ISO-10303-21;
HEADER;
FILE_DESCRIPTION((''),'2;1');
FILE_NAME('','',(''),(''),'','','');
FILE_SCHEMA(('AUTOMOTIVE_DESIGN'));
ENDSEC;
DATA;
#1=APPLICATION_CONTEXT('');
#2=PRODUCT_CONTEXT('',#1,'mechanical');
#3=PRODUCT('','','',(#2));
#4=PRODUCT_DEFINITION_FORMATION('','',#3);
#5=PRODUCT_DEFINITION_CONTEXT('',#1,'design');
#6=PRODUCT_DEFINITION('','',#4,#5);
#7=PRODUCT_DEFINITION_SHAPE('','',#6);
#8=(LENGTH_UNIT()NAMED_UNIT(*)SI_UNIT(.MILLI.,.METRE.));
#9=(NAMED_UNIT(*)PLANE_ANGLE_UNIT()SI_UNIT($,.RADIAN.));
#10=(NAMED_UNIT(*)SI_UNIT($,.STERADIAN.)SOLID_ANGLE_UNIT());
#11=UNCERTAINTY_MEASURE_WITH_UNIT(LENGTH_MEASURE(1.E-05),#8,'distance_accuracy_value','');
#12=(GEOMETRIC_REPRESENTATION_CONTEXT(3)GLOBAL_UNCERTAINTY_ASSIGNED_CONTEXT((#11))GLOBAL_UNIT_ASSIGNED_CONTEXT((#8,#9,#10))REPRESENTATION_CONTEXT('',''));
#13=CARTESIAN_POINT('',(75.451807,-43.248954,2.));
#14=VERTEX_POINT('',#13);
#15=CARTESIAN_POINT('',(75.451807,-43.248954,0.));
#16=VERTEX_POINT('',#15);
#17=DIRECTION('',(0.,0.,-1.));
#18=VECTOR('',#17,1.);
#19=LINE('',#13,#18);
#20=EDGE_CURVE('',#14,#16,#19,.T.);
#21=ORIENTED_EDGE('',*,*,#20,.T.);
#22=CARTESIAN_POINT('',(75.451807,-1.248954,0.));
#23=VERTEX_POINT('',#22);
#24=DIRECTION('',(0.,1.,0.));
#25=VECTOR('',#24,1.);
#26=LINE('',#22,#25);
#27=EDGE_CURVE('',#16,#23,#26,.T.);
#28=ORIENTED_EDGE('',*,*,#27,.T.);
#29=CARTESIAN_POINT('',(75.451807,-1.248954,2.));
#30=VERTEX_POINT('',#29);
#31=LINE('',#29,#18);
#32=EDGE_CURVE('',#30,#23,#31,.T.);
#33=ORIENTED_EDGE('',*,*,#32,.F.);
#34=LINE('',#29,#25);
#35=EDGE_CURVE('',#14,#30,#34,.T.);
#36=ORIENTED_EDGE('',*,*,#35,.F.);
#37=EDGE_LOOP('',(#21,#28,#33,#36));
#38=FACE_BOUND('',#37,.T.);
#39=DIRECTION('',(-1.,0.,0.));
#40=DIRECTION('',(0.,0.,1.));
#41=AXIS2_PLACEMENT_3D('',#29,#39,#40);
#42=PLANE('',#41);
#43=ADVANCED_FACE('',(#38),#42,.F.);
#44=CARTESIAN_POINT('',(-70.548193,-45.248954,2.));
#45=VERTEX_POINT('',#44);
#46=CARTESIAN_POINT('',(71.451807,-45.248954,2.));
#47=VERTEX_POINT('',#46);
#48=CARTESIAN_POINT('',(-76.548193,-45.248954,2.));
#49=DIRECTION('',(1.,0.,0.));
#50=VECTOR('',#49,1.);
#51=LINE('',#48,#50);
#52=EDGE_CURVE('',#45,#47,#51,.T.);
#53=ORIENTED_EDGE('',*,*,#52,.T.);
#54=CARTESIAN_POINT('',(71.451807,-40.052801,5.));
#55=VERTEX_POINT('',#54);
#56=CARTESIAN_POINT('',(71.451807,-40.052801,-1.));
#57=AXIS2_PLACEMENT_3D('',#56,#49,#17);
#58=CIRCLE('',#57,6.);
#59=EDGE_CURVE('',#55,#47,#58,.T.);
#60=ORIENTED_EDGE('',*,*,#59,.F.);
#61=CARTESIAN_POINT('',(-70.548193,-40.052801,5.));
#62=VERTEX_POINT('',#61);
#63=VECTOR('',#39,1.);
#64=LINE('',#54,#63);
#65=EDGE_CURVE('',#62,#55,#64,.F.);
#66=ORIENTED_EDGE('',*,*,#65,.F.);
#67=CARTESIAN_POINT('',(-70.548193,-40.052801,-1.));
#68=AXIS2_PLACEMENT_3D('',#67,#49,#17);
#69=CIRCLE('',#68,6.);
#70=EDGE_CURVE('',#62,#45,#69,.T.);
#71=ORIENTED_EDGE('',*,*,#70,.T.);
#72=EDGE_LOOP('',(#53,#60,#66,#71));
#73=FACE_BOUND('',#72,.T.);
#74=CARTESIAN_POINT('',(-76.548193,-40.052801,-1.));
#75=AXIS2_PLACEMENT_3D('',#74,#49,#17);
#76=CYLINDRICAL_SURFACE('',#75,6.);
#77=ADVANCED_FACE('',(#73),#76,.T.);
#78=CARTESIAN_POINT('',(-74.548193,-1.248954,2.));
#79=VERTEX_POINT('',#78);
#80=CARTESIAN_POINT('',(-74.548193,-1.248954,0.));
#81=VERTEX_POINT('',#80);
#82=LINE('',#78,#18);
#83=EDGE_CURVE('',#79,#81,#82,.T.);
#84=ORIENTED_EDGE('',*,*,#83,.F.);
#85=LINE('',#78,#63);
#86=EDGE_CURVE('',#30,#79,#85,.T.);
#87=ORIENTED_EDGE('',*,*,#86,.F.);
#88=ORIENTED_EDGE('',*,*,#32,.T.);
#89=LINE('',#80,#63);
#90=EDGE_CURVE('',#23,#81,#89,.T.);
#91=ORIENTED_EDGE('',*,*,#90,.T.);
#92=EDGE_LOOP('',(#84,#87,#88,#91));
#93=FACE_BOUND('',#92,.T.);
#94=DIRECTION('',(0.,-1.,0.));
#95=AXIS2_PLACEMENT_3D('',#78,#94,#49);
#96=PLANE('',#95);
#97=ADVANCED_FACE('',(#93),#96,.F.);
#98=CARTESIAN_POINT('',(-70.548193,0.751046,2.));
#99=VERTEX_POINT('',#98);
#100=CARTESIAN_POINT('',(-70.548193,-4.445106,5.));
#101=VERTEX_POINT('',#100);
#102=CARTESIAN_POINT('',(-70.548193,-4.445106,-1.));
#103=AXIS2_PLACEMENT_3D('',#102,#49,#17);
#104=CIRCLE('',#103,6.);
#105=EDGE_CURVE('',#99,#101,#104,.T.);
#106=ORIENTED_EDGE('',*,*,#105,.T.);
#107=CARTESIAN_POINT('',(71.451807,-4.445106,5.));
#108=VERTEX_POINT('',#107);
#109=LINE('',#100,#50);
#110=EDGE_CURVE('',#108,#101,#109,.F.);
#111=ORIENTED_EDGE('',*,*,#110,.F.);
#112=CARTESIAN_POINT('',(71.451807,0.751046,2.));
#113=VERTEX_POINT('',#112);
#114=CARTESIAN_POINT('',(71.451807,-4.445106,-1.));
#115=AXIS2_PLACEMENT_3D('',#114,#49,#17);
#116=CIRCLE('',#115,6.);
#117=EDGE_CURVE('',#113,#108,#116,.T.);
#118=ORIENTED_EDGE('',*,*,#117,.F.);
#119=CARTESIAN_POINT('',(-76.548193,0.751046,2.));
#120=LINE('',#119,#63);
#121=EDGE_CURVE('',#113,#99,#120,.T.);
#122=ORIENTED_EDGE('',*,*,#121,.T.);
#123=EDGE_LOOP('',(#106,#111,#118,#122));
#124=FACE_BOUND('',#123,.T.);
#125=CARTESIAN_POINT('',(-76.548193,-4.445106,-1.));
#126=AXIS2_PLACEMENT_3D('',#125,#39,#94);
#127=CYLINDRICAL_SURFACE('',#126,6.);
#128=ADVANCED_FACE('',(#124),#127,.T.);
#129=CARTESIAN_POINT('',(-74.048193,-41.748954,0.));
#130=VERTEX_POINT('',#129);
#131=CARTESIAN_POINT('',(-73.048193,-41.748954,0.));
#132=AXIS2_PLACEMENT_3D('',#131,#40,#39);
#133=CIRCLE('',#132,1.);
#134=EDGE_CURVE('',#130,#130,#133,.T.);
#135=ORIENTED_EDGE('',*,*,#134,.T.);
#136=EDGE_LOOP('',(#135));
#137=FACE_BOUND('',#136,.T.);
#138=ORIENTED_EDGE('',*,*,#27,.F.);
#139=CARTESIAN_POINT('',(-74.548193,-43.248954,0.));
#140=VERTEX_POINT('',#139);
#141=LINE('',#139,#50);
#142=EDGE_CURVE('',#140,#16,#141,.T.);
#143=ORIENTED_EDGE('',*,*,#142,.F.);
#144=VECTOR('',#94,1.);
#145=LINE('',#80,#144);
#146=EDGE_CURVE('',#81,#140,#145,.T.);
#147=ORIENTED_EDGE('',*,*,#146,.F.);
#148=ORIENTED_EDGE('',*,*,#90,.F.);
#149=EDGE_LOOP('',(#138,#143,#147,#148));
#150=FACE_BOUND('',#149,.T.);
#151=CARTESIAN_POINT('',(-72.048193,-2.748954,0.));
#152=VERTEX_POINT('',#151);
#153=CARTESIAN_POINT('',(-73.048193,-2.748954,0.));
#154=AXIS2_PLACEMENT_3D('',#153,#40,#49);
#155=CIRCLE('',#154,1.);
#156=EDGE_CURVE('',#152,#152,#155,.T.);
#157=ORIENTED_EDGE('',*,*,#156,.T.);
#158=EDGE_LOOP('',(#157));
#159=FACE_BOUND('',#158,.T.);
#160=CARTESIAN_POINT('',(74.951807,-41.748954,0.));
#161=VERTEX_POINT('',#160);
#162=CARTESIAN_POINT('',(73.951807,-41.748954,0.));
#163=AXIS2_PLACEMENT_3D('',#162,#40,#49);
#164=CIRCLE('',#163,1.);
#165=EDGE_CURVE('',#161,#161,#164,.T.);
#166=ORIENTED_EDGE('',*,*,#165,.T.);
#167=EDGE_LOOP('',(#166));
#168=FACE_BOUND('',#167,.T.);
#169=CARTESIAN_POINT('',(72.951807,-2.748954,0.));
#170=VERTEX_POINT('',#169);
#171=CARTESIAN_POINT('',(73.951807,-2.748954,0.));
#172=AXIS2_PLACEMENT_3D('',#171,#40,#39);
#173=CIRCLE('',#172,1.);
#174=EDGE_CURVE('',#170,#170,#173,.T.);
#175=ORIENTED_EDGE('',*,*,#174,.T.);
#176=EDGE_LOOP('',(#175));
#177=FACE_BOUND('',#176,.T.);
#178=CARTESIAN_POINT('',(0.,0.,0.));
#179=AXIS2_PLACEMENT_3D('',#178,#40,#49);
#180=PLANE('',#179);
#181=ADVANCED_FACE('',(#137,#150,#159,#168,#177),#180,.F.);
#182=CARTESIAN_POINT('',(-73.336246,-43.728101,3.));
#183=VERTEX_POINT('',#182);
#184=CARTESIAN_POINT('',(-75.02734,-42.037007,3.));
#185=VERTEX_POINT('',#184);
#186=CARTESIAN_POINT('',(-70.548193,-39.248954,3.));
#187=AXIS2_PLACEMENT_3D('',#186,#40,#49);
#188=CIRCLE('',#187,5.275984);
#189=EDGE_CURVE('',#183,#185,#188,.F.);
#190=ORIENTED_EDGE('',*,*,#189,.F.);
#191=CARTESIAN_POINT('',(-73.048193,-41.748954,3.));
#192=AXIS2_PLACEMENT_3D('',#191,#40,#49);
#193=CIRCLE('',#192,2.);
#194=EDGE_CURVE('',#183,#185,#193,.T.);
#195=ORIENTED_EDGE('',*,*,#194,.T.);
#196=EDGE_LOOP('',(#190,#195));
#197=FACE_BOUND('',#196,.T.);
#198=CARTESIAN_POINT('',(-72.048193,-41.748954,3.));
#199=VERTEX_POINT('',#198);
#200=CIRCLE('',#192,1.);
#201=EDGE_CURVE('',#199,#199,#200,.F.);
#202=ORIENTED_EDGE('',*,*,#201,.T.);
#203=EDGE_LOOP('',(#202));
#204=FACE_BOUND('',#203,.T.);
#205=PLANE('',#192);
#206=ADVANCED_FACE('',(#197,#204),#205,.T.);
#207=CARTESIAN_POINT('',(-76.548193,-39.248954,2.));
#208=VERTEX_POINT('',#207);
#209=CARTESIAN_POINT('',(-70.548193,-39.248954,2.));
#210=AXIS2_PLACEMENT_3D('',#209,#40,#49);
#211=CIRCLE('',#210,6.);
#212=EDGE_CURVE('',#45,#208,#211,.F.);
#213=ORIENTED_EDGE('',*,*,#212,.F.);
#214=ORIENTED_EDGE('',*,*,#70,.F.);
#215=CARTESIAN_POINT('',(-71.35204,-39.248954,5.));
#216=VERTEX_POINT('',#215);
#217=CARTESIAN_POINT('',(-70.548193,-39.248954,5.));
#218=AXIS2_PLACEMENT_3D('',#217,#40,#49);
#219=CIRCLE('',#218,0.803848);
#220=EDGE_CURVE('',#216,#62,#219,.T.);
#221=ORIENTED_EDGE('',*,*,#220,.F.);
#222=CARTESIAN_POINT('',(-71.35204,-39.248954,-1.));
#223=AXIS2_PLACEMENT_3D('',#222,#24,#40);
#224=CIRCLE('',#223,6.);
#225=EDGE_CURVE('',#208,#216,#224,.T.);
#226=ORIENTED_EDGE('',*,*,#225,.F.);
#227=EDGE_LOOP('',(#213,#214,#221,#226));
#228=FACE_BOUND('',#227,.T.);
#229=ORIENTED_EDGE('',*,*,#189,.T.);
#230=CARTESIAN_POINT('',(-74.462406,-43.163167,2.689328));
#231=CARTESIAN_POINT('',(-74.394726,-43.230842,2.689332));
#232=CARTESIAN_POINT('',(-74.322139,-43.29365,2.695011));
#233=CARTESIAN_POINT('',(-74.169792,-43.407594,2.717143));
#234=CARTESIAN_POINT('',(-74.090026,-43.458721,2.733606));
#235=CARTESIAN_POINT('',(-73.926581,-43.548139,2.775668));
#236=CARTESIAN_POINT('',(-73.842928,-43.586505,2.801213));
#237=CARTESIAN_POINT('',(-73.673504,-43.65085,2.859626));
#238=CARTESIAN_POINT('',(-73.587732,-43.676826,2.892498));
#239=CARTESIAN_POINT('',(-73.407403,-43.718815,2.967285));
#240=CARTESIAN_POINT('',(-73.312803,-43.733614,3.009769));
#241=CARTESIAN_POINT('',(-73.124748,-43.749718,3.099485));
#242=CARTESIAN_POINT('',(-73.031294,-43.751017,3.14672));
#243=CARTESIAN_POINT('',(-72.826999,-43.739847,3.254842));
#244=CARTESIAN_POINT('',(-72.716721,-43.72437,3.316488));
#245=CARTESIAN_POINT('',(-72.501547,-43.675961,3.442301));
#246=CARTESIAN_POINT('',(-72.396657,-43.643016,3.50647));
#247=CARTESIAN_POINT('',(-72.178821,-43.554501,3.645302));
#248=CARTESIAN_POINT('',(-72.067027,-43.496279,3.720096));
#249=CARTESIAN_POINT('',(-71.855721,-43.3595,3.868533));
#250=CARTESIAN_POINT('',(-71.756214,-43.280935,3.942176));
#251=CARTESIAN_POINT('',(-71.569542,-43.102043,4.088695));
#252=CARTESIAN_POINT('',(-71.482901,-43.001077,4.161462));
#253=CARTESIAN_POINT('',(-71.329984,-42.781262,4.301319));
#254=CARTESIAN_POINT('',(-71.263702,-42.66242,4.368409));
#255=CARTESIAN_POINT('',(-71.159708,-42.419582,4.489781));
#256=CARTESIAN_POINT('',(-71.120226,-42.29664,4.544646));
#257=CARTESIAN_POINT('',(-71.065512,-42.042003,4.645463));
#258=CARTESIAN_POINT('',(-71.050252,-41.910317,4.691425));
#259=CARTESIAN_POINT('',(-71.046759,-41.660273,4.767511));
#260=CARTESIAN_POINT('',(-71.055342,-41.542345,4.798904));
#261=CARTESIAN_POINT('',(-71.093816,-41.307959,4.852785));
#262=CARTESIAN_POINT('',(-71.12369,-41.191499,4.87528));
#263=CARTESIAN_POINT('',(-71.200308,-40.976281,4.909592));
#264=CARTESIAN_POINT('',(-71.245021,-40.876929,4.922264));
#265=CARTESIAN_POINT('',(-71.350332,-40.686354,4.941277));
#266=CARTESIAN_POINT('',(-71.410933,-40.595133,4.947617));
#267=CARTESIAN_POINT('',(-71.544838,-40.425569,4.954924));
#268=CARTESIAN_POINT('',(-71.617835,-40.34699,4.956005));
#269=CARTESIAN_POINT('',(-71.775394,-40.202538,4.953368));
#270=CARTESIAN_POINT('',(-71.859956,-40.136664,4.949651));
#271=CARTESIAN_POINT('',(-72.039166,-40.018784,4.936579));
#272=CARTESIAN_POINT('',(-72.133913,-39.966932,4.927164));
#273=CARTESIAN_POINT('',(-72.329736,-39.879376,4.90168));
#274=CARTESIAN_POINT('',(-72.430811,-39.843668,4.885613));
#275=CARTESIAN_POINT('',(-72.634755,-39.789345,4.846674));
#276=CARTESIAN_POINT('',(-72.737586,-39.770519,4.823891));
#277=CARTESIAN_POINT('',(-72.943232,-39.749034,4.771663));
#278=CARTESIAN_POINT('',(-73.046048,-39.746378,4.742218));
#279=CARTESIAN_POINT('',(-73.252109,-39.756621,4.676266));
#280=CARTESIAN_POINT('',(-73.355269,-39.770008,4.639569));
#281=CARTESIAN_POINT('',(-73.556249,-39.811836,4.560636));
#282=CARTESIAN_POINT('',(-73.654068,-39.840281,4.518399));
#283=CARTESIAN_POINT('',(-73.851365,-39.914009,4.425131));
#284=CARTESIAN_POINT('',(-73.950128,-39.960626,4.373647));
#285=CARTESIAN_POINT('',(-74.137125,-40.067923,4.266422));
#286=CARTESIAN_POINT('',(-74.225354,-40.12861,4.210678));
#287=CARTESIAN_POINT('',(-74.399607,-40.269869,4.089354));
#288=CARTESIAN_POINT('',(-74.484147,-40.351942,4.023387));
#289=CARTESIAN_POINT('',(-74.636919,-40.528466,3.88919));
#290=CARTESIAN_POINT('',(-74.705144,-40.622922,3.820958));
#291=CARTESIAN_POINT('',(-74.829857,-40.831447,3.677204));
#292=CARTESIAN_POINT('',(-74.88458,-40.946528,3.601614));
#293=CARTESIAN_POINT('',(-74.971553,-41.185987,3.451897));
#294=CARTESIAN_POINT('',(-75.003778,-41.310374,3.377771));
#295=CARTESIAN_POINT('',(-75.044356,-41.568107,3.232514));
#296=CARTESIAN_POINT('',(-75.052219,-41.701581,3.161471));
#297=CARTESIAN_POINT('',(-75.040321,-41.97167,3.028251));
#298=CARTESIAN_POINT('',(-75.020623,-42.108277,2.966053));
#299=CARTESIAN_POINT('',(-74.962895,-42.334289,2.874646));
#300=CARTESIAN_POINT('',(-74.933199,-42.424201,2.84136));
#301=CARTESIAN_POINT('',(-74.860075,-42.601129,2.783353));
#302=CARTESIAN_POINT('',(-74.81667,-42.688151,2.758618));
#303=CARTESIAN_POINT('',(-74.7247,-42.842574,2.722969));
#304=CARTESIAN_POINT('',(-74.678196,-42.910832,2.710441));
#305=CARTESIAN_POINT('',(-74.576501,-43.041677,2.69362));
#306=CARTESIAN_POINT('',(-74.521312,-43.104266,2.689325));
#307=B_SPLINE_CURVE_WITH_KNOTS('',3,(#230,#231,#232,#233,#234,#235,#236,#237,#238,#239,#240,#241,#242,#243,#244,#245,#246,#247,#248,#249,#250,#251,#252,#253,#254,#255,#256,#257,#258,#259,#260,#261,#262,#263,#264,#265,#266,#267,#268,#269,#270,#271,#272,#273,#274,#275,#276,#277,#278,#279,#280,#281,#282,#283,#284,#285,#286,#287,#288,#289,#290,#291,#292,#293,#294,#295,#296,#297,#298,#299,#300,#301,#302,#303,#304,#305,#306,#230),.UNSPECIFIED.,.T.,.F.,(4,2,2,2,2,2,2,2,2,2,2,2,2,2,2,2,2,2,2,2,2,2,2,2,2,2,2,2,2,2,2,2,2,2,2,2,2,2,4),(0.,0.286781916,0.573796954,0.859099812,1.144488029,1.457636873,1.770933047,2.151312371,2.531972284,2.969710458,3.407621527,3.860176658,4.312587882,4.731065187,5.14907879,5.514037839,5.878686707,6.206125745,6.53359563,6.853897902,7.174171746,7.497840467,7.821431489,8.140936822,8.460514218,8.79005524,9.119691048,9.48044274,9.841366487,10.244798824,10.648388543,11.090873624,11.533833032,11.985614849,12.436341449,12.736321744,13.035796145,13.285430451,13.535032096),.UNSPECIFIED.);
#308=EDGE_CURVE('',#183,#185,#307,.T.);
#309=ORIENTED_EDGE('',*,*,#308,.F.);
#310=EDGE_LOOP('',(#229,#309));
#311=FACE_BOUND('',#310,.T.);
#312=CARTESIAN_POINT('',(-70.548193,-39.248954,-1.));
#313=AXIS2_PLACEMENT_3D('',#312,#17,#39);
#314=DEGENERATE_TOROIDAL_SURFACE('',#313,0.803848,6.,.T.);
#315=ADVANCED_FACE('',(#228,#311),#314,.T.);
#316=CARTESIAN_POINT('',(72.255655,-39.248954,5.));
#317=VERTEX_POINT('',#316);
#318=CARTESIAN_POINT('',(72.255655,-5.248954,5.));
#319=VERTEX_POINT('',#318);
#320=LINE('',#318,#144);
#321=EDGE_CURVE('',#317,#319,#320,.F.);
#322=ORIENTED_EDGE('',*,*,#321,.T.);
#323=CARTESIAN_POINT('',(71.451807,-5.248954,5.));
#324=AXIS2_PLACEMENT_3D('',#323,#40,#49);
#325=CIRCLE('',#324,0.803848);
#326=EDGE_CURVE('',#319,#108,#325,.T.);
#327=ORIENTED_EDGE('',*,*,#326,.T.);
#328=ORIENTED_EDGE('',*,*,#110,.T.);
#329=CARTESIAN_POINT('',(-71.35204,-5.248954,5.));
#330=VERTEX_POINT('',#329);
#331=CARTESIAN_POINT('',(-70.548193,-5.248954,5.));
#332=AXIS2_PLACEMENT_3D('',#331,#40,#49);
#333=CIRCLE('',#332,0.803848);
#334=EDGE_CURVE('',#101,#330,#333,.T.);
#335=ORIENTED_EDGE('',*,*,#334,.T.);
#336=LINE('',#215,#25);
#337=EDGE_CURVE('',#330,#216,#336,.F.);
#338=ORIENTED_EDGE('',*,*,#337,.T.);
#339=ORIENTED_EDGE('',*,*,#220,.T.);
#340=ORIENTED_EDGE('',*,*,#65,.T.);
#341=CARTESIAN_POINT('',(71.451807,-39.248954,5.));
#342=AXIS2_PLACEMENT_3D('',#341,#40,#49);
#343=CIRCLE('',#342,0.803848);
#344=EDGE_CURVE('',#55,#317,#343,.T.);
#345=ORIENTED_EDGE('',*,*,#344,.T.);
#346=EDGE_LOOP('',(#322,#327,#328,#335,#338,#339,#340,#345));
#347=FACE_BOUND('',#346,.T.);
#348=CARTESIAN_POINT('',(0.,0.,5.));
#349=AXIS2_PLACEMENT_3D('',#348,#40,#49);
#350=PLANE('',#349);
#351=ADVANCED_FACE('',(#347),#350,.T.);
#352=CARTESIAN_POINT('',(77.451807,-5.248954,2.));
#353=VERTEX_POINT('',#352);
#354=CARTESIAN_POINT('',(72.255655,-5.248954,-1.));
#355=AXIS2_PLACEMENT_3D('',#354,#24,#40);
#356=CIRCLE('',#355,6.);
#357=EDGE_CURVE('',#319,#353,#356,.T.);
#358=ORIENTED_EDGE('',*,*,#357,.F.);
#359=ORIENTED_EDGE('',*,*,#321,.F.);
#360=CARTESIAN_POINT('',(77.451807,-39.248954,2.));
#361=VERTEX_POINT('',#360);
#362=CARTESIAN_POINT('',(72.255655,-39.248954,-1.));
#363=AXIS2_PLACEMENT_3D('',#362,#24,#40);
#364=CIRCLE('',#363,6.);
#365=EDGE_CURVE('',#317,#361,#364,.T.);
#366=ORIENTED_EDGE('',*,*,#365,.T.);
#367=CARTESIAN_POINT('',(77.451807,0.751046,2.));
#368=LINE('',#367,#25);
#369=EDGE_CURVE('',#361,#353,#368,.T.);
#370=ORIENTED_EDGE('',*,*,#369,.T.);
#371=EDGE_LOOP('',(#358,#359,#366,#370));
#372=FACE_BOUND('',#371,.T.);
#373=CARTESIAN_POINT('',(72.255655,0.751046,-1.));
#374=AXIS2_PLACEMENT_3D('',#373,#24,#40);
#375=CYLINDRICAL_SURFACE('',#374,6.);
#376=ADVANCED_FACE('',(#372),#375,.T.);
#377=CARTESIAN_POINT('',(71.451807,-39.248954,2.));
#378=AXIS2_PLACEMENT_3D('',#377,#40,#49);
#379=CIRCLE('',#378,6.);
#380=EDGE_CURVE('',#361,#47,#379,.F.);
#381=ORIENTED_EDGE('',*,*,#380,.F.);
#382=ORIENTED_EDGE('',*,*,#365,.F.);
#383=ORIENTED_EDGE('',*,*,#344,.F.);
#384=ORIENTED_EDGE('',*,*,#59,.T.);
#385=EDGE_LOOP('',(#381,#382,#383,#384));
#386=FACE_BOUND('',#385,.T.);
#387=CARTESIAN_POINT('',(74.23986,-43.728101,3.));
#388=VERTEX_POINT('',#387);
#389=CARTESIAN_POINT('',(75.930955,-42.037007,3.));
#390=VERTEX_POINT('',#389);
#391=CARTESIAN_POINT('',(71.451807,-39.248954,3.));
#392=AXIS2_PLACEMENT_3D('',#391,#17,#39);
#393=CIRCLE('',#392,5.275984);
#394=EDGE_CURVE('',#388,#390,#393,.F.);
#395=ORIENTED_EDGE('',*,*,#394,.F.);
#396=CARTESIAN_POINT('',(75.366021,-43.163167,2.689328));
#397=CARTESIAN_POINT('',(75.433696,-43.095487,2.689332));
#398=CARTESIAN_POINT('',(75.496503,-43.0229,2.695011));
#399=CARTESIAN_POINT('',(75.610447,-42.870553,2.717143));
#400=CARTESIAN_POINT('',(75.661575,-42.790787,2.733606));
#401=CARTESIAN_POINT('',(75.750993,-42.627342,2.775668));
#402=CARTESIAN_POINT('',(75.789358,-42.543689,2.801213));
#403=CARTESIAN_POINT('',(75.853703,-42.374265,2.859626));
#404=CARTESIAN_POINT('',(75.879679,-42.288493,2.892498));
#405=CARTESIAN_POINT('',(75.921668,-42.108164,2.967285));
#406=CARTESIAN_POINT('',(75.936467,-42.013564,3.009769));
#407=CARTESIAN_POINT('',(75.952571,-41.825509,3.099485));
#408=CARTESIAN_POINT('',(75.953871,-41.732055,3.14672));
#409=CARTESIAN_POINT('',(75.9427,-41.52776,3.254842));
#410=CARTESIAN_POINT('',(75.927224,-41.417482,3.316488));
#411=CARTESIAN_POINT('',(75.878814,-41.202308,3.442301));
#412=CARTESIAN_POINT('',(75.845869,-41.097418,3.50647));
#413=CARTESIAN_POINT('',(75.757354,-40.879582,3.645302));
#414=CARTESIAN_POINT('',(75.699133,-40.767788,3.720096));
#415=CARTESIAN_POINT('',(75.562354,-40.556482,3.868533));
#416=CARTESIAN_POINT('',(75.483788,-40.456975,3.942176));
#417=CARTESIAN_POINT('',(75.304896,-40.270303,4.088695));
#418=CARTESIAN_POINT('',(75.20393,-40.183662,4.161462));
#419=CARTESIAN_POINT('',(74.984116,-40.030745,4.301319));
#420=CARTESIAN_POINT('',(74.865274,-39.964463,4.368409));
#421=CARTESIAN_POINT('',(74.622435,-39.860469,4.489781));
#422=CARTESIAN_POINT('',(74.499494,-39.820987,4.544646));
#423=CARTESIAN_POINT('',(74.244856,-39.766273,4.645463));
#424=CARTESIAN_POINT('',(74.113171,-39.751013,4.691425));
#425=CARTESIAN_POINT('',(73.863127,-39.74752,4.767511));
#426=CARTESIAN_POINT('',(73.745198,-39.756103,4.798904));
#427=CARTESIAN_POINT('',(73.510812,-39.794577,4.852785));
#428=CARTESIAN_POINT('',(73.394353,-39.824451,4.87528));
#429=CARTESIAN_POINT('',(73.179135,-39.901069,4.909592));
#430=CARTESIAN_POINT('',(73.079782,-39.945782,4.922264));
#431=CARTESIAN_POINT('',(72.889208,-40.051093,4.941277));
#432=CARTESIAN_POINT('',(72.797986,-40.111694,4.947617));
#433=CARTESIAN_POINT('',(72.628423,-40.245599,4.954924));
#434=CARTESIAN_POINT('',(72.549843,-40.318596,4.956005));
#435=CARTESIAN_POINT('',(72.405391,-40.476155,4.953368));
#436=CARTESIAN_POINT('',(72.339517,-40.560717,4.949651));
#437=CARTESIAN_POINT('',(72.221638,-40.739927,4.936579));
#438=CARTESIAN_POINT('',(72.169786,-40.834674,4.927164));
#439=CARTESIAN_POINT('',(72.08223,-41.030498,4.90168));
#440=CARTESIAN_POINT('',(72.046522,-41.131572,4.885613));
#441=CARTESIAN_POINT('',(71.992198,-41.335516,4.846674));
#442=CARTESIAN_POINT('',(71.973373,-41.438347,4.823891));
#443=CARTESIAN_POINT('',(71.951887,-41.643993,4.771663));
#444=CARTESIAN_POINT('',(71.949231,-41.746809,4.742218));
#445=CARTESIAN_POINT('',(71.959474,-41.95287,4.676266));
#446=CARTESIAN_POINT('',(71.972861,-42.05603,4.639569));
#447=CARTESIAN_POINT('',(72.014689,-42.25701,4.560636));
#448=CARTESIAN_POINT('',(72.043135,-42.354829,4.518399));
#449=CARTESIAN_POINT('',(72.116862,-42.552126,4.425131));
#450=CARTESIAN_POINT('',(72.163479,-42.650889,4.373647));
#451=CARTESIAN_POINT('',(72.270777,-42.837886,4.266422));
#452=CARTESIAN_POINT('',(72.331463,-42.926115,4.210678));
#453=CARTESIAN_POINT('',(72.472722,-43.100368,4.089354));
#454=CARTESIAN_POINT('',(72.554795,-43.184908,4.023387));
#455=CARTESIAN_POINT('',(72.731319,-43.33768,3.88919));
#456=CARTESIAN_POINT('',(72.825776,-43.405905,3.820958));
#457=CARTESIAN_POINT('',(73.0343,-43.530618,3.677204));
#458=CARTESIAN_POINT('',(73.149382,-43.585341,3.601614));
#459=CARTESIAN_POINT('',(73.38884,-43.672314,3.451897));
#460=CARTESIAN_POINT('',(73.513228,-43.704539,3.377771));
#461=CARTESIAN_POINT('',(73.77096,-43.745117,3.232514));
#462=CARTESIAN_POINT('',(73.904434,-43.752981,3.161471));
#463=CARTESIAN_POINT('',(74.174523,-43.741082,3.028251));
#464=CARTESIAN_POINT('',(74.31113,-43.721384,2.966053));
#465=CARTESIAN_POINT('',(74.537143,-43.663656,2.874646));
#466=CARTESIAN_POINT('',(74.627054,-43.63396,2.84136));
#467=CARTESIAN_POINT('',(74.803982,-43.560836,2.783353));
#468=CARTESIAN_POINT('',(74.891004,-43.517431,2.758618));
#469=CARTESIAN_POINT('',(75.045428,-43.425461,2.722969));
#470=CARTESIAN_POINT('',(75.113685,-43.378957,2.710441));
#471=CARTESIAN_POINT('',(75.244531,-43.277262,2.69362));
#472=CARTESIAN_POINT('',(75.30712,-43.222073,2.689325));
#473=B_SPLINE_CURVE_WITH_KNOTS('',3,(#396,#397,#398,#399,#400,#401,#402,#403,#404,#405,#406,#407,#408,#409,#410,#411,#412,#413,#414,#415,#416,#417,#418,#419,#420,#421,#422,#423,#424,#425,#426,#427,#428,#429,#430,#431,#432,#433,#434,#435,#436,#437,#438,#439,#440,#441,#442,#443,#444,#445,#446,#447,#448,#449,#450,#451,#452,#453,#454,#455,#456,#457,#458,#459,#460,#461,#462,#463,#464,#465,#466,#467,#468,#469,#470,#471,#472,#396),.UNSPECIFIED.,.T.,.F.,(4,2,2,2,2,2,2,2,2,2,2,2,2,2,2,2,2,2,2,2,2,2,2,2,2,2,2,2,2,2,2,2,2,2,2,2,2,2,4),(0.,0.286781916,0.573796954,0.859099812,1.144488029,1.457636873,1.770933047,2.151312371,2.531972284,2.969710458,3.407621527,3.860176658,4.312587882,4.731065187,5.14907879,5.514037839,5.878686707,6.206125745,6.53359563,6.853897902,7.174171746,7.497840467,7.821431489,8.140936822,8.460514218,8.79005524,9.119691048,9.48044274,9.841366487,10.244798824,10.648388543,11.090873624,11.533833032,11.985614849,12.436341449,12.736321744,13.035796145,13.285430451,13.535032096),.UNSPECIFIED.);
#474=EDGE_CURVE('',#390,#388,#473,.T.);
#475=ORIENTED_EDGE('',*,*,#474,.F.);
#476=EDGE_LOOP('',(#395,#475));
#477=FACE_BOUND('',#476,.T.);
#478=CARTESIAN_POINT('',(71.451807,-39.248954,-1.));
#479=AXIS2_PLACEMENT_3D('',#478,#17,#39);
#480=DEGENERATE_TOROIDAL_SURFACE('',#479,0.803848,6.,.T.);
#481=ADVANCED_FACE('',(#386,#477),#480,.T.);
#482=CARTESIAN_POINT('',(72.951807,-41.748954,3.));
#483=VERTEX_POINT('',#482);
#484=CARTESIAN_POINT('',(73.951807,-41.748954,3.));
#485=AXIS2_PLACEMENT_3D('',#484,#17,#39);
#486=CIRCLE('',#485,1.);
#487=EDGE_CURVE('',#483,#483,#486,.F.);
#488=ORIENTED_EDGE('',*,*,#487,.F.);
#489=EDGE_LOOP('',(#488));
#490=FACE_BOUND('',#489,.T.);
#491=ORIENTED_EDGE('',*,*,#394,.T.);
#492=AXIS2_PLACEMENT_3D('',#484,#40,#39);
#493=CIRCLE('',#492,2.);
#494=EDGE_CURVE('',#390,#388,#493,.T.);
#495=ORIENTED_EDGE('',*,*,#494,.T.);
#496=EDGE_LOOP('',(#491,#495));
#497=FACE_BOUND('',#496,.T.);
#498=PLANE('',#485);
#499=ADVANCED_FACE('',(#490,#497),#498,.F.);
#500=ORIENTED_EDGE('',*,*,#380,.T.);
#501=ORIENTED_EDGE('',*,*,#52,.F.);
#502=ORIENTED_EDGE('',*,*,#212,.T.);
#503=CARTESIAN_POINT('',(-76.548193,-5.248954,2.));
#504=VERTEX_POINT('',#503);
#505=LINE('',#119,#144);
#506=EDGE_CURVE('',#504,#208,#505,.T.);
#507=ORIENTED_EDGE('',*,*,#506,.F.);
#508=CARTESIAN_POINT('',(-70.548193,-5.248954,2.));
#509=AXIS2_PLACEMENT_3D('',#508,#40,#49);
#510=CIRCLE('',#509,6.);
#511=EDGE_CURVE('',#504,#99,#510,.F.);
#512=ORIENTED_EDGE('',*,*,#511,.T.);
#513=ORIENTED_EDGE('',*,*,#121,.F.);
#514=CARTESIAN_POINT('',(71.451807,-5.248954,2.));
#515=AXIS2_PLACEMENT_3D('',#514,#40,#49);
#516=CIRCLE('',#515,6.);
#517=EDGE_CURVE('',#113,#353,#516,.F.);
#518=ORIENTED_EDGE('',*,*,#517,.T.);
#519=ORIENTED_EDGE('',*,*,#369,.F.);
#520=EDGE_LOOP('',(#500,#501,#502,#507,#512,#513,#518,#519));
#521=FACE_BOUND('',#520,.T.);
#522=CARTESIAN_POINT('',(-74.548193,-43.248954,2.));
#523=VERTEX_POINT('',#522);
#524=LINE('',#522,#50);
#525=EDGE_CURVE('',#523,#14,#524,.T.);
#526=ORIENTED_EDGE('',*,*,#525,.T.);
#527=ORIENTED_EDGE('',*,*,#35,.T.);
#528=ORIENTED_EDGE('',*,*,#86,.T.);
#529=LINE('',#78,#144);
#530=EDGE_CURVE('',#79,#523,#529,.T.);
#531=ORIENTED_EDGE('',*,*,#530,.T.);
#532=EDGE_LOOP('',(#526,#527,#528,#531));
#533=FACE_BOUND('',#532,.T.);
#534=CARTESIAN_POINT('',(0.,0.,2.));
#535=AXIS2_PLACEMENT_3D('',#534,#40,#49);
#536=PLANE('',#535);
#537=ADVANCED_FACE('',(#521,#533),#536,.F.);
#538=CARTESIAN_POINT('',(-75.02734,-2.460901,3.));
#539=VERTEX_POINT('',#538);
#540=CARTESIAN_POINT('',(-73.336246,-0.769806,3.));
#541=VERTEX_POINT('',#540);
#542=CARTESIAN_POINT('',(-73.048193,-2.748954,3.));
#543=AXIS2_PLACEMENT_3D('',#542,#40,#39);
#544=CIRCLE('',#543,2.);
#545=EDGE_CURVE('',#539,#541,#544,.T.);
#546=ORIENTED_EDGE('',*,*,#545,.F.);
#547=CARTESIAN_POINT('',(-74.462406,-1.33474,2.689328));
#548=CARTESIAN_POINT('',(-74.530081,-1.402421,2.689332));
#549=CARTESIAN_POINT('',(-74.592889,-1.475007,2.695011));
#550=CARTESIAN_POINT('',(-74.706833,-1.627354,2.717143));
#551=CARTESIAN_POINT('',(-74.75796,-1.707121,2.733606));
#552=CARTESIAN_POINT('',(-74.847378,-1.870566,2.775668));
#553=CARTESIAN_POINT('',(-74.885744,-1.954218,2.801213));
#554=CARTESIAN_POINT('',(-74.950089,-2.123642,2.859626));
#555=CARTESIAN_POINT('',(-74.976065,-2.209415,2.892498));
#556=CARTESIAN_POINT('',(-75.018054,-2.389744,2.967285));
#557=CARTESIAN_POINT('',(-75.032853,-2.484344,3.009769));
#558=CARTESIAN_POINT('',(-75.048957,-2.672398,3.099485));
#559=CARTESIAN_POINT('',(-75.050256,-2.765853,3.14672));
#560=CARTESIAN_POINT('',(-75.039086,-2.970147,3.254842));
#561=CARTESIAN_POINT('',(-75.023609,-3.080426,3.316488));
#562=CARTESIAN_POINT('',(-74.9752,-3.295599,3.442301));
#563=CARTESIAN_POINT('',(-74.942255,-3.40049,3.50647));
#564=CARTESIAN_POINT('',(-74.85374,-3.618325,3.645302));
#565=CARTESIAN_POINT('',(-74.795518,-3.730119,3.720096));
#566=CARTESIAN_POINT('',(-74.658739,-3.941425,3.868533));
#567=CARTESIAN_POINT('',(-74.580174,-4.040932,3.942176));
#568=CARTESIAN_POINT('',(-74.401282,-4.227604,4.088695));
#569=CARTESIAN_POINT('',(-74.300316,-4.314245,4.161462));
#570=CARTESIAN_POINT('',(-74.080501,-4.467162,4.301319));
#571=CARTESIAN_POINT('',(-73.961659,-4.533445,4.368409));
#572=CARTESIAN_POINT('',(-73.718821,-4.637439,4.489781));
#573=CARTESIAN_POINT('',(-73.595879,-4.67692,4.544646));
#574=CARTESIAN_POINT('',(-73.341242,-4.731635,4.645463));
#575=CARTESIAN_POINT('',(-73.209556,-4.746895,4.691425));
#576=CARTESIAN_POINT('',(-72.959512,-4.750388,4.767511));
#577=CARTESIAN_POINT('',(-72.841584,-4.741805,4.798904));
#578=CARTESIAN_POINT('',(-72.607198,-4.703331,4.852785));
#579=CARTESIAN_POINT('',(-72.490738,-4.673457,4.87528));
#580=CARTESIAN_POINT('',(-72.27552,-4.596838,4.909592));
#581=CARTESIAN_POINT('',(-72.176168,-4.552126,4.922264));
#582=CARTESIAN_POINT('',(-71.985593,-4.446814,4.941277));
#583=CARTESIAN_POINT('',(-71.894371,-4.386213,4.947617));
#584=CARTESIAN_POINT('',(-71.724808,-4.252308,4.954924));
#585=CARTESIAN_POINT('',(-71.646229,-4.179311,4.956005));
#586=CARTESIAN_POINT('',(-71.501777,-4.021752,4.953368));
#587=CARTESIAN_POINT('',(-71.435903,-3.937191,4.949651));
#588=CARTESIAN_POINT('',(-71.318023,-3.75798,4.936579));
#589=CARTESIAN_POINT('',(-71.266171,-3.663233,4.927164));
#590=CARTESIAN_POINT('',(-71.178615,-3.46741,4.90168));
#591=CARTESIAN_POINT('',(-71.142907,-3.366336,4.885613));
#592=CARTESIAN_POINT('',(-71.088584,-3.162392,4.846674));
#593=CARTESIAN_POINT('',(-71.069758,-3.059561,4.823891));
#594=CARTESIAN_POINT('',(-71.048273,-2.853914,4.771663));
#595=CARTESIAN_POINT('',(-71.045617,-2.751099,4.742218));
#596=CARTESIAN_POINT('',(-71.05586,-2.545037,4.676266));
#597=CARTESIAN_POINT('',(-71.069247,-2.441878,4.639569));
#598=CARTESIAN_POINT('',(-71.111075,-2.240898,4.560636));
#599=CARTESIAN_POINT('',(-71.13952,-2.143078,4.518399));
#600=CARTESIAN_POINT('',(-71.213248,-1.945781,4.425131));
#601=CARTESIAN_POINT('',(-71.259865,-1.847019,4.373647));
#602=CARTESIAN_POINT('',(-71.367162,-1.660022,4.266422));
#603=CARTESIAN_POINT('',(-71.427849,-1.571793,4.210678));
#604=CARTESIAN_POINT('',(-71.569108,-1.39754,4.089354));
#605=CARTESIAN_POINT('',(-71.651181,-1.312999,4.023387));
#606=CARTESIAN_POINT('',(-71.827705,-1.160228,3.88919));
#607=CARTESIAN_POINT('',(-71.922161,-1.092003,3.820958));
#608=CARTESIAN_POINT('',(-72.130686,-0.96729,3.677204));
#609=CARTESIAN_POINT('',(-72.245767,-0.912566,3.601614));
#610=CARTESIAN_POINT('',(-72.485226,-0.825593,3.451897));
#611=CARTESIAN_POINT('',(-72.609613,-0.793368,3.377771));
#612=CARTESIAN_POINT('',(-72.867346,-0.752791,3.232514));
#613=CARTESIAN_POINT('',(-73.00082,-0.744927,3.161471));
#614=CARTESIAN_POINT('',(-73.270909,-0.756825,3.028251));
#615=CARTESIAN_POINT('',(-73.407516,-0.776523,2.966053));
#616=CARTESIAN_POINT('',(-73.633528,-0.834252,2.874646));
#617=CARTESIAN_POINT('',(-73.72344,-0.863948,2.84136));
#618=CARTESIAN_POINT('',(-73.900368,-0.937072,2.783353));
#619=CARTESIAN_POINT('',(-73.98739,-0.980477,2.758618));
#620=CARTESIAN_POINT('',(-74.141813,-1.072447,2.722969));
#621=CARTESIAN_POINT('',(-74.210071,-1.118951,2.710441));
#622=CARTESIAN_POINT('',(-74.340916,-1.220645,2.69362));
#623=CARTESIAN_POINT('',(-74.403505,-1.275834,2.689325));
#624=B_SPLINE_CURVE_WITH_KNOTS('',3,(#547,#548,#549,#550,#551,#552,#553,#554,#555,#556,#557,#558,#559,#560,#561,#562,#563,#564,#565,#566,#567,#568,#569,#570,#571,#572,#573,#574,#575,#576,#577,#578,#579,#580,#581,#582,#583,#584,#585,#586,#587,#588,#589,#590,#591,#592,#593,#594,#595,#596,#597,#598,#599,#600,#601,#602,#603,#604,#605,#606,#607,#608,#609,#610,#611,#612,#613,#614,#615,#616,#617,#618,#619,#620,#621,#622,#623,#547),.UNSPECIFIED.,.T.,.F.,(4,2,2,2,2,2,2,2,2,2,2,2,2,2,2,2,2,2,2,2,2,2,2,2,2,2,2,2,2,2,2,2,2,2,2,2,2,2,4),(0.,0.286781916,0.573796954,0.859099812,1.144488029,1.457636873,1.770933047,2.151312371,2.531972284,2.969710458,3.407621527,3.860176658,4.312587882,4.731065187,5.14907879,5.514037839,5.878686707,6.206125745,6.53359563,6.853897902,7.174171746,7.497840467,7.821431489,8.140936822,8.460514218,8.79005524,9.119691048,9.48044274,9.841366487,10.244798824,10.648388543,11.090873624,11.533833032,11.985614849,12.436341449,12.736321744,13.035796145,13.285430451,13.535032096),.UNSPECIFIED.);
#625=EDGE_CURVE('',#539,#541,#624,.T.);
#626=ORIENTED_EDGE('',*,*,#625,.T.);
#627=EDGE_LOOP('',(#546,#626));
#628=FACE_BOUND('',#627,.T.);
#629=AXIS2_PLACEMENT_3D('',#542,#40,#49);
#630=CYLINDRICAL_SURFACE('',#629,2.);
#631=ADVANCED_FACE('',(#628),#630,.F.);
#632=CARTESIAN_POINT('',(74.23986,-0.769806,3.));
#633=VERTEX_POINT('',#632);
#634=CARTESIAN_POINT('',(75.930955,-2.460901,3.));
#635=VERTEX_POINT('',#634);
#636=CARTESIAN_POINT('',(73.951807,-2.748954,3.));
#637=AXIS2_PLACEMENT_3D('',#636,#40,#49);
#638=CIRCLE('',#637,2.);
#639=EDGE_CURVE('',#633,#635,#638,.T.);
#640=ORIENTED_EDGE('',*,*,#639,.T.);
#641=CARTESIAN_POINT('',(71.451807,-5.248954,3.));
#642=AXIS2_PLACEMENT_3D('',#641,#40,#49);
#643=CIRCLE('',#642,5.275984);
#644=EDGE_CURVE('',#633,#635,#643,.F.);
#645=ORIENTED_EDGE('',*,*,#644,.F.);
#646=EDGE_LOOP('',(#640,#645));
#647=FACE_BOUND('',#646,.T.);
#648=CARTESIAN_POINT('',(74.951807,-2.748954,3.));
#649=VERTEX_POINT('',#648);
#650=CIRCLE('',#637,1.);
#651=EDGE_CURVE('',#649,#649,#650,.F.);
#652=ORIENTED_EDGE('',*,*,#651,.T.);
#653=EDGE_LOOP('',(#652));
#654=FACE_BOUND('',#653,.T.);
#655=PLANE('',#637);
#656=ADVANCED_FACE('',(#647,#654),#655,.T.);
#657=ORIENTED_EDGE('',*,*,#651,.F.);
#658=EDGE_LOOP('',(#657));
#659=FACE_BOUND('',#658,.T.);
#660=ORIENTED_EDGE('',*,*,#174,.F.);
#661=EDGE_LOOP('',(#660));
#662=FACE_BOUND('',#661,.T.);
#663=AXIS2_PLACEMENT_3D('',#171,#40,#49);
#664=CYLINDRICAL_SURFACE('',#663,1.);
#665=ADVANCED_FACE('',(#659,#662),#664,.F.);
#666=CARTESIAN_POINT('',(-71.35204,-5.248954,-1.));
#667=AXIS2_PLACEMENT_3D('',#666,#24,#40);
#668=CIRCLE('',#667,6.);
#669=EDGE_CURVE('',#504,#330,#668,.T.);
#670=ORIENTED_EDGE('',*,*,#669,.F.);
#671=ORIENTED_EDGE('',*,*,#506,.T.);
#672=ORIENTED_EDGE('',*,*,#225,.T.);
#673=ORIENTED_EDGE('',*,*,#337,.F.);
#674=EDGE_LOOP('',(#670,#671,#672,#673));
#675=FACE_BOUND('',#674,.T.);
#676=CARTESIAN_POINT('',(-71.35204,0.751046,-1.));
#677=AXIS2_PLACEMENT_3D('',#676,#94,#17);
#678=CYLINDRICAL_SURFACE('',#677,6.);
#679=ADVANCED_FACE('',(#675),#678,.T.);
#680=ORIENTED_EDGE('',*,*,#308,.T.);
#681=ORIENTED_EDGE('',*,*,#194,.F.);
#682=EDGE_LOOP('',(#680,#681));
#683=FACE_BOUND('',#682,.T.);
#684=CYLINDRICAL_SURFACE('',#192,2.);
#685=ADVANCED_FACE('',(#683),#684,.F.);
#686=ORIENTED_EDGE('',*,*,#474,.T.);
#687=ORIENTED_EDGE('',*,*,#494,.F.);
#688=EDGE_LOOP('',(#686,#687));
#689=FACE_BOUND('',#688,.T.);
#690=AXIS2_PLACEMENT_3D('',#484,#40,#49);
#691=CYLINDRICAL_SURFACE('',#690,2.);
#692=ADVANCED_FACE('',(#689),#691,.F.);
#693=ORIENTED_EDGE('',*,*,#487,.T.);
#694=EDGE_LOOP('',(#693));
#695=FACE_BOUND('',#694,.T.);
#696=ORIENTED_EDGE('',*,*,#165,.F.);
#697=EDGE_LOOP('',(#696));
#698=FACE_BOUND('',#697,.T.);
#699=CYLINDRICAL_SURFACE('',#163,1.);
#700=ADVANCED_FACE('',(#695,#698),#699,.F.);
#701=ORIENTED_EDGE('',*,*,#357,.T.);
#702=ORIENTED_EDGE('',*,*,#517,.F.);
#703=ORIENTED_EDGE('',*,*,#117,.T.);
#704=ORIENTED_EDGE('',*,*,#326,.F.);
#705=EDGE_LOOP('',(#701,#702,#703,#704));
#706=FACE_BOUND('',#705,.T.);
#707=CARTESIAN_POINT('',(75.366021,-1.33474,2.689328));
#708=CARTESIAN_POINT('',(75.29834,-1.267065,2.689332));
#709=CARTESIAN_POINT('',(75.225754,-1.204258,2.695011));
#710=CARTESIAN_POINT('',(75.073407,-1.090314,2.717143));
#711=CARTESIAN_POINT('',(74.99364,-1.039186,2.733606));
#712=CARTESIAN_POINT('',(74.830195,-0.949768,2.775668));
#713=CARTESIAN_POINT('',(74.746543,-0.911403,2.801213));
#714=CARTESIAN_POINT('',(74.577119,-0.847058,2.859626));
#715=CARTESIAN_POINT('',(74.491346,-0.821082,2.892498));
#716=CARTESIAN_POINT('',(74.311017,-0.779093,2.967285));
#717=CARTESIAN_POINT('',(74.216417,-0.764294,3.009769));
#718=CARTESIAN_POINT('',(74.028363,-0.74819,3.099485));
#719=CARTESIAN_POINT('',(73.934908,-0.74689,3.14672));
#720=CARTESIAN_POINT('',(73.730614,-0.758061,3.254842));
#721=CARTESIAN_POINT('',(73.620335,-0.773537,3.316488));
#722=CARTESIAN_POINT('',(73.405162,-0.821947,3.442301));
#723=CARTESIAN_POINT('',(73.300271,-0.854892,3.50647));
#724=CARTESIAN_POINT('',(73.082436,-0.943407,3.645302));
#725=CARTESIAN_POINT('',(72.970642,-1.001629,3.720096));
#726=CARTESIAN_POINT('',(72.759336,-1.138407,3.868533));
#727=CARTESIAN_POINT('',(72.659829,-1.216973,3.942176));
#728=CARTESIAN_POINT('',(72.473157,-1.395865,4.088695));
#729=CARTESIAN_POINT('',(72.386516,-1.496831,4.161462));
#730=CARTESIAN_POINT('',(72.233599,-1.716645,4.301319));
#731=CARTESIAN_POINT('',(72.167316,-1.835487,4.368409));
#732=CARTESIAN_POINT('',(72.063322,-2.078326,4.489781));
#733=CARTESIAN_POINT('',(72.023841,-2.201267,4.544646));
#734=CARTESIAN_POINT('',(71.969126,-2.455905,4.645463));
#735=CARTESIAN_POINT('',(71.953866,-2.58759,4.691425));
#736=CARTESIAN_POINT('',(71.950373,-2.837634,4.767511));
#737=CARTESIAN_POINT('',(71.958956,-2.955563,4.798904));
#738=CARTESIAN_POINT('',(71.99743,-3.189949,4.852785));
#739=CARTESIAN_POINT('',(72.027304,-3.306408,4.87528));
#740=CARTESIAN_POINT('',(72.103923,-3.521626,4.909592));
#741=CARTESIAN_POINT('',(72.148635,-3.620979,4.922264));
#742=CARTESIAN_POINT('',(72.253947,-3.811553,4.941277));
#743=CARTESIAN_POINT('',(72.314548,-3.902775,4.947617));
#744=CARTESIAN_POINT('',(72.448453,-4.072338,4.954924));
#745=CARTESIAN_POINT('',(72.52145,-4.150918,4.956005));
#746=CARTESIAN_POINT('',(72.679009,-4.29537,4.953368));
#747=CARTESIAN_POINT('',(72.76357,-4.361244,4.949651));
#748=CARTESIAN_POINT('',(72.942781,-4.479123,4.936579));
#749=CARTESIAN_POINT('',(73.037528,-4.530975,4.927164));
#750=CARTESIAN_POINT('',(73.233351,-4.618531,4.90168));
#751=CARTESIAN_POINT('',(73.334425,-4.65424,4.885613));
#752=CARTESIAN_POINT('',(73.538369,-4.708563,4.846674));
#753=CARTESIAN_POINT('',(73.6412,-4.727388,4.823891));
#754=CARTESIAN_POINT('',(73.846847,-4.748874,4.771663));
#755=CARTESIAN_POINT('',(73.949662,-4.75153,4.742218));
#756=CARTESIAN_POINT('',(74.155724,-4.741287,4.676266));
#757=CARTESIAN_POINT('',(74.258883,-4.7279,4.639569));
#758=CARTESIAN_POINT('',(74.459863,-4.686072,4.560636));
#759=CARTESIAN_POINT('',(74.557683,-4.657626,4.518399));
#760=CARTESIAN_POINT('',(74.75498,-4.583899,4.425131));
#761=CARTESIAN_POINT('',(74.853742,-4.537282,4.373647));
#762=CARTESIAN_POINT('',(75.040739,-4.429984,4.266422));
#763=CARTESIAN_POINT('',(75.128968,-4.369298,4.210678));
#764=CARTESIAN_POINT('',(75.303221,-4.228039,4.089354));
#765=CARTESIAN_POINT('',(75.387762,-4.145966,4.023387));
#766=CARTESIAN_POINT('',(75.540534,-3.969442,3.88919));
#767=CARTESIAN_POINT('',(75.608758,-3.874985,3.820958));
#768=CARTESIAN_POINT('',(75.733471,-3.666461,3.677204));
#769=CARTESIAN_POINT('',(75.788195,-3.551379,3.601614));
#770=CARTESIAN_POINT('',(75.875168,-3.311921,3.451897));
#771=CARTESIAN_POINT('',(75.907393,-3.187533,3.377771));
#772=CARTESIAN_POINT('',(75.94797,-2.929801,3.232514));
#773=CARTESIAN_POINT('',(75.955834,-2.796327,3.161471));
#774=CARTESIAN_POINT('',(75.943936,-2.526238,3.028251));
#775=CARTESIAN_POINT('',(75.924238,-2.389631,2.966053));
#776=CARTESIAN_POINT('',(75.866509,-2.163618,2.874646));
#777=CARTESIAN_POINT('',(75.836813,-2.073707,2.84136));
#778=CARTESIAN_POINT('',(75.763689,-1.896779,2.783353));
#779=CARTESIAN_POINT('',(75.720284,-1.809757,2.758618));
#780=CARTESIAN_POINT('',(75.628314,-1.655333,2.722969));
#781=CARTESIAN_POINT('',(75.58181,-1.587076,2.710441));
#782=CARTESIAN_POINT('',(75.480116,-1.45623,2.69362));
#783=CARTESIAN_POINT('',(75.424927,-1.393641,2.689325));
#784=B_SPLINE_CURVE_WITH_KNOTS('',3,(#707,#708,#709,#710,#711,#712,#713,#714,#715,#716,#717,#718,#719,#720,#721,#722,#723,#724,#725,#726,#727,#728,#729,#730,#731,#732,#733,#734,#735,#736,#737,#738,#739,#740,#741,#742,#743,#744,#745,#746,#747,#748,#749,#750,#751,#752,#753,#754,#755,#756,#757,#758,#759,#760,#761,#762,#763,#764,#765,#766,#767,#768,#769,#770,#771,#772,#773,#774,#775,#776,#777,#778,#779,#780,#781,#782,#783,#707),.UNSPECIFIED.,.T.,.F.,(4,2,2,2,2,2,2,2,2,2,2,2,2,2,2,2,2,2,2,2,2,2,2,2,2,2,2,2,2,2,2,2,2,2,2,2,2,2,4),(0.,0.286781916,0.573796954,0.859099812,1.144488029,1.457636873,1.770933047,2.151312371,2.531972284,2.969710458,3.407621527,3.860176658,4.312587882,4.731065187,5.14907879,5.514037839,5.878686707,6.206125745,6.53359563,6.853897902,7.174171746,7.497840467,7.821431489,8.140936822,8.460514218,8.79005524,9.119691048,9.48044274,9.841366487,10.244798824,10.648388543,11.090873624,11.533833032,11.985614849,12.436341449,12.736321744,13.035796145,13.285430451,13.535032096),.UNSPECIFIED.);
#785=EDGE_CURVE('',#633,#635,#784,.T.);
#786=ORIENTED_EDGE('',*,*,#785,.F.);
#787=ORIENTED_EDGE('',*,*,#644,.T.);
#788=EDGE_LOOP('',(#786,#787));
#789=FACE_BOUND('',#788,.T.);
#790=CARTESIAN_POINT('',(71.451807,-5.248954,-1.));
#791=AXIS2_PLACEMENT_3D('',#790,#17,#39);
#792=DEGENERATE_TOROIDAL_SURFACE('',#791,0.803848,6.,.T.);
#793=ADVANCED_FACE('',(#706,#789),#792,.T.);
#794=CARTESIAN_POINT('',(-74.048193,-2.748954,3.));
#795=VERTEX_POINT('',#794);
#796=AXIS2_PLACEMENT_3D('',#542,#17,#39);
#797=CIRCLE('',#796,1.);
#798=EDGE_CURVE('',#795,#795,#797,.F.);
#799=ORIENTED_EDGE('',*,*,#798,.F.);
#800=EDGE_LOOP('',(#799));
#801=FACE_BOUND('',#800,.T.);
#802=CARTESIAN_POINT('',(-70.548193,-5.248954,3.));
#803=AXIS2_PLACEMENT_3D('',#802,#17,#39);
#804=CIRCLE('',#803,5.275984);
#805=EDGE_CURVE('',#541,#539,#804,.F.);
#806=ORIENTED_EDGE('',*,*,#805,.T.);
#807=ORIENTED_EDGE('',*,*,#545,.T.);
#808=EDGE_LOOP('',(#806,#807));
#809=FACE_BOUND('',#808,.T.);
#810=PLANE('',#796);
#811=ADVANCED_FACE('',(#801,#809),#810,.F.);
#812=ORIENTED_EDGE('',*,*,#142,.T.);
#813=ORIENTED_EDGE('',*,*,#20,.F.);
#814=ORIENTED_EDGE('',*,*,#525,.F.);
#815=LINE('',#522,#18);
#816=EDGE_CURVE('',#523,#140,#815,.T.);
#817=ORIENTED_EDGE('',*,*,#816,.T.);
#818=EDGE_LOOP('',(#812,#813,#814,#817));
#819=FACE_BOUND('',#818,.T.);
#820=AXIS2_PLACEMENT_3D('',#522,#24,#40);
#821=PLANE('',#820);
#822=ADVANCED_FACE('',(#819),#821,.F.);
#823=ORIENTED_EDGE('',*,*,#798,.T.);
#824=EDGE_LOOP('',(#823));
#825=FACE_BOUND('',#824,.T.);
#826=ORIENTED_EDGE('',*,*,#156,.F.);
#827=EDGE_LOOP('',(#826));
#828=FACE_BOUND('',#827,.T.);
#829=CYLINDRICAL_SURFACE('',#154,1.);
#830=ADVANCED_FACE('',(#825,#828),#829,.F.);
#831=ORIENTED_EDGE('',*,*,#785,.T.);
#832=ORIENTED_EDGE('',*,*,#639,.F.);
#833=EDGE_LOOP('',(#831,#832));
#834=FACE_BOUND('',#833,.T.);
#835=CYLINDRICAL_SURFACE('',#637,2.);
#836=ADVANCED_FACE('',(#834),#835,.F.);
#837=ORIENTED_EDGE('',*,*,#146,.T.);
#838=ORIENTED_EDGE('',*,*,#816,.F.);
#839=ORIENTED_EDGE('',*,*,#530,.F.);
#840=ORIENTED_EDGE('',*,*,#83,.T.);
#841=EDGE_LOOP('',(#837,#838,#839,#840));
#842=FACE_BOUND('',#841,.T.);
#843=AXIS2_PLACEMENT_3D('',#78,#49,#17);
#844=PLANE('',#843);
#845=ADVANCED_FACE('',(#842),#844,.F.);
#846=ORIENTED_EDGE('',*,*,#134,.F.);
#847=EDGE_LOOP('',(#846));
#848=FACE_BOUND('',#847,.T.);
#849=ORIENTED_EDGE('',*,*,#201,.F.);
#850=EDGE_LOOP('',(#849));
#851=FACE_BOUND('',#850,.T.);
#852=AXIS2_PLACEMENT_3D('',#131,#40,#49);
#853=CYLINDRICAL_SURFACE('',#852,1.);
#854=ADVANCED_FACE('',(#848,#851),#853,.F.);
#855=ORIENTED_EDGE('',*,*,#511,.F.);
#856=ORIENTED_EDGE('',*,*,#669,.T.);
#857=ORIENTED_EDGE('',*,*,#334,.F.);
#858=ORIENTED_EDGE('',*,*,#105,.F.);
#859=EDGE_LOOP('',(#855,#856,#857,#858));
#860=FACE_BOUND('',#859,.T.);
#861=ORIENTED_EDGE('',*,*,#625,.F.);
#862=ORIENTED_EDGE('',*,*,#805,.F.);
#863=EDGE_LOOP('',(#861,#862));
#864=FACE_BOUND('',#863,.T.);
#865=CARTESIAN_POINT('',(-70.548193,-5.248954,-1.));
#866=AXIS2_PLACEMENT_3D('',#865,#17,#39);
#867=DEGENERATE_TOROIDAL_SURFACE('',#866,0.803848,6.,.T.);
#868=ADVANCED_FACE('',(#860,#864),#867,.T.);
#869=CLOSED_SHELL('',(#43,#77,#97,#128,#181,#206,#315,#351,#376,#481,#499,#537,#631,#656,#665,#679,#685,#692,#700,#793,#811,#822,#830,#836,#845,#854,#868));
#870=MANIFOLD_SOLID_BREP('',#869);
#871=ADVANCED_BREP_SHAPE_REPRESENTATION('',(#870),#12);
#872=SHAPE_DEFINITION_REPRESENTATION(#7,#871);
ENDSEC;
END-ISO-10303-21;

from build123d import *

# Parameters (mm, degrees)
SKETCH_1_W          = 150
SKETCH_1_H          = 42
EXTRUDE_1_DEPTH     = 2
SKETCH_2_R          = 1
CUT_EXTRUDE_1_DEPTH = 2
SKETCH_3_W          = 154
SKETCH_3_H          = 46
EXTRUDE_2_DEPTH     = 3
FILLET_2_R          = 6
FILLET_3_R          = 6
CUT_EXTRUDE_START   = 2
SKETCH_2_2_R        = 1
CUT_EXTRUDE_2_DEPTH = 2
SKETCH_4_R          = 2
CUT_EXTRUDE_3_DEPTH = 2


with BuildPart() as part:
    # 草图1 → 凸台-拉伸1 (new body)
    with BuildSketch(Plane.XY):
        with Locations((0.451807229, -22.248953788)):
            Rectangle(SKETCH_1_W, SKETCH_1_H)
    extrude(amount=EXTRUDE_1_DEPTH)

    # 草图2 → 切除-拉伸1 (cut)
    with BuildSketch(Plane.XY.offset(2)):
        with Locations((73.951807229, -41.748953788)):
            Circle(SKETCH_2_R)
        with Locations(Location((73.951807229, -2.748953788, 0), (0, 0, 180))):
            Circle(SKETCH_2_R)
        with Locations(Location((-73.048192771, -41.748953788, 0), (0, 0, 180))):
            Circle(SKETCH_2_R)
        with Locations((-73.048192771, -2.748953788)):
            Circle(SKETCH_2_R)
    extrude(amount=-CUT_EXTRUDE_1_DEPTH, mode=Mode.SUBTRACT)

    # 草图3 → 凸台-拉伸2 (add)
    with BuildSketch(Plane.XY.offset(2)):
        with Locations((0.451807229, -22.248953788)):
            Rectangle(SKETCH_3_W, SKETCH_3_H)
    extrude(amount=EXTRUDE_2_DEPTH)

    # 圆角2
    fillet_2_edges = [part.edges().sort_by_distance(p)[0] for p in [
        (-76.548192771, 0.751046212, 3.5),
        (-76.548192771, -45.248953788, 3.5),
        (77.451807229, -45.248953788, 3.5),
        (77.451807229, 0.751046212, 3.5),
    ]]
    fillet(fillet_2_edges, radius=FILLET_2_R)

    # 圆角3
    # the kernel refuses this fillet: 6 mm, written as the material it takes off along each edge
    with BuildSketch(Plane(origin=(71.451807229, -5.248953788, 5), x_dir=(0, 1, 0), z_dir=(-1, 0, 0))) as fillet_3_piece_1:
        with BuildLine():
            CenterArc((0.803847577, 6), FILLET_3_R, 270, 60)
            Line((0.803847577, 0), (0.803847577, -0.12))
            Line((0.803847577, -0.12), (6, -0.12))
            Line((6, -0.12), (6.12, 0))
            ThreePointArc((6.12, 0), (6.12, 1.5), (6.103923048, 2.94))
            Line((6.103923048, 2.94), (6, 3))
        make_face()
    revolve(axis=Axis((71.451807229, -5.248953788, 5), (0, 0, -1)), revolution_arc=90, mode=Mode.SUBTRACT)
    with BuildSketch(Plane(origin=(77.451807229, -5.248953788, 5), x_dir=(-1, 0, 0), z_dir=(0, -1, 0)), Plane(origin=(-76.548192771, -39.248953788, 5), x_dir=(1, 0, 0), z_dir=(0, 1, 0))) as fillet_3_piece_2:
        with BuildLine():
            CenterArc((5.196152423, 6), FILLET_3_R, 210, 60)
            Line((0, 3), (-0.103923048, 2.94))
            ThreePointArc((-0.103923048, 2.94), (-0.12, 1.5), (-0.12, 0))
            Line((-0.12, 0), (0, -0.12))
            Line((0, -0.12), (5.196152423, -0.12))
            Line((5.196152423, -0.12), (5.196152423, 0))
        make_face()
    extrude(amount=34, mode=Mode.SUBTRACT)
    with BuildSketch(Plane(origin=(71.451807229, -39.248953788, 5), x_dir=(1, 0, 0), z_dir=(0, 1, 0))) as fillet_3_piece_3:
        with BuildLine():
            CenterArc((0.803847577, 6), FILLET_3_R, 270, 60)
            Line((6, 3), (6.103923048, 2.94))
            ThreePointArc((6.103923048, 2.94), (6.12, 1.5), (6.12, 0))
            Line((6.12, 0), (6, -0.12))
            Line((6, -0.12), (0.803847577, -0.12))
            Line((0.803847577, -0.12), (0.803847577, 0))
        make_face()
    revolve(axis=Axis((71.451807229, -39.248953788, 5), (0, 0, -1)), revolution_arc=90, mode=Mode.SUBTRACT)
    with BuildSketch(Plane(origin=(71.451807229, -45.248953788, 5), x_dir=(0, 1, 0), z_dir=(-1, 0, 0))) as fillet_3_piece_4:
        with BuildLine():
            CenterArc((5.196152423, 6), FILLET_3_R, 210, 60)
            Line((0, 3), (-0.103923048, 2.94))
            ThreePointArc((-0.103923048, 2.94), (-0.12, 1.5), (-0.12, 0))
            Line((-0.12, 0), (0, -0.12))
            Line((0, -0.12), (5.196152423, -0.12))
            Line((5.196152423, -0.12), (5.196152423, 0))
        make_face()
    extrude(amount=142, mode=Mode.SUBTRACT)
    with BuildSketch(Plane(origin=(-70.548192771, -39.248953788, 5), x_dir=(-1, 0, 0), z_dir=(0, 1, 0))) as fillet_3_piece_5:
        with BuildLine():
            CenterArc((0.803847577, -6), FILLET_3_R, 30, 60)
            Line((6, -3), (6.103923048, -2.94))
            ThreePointArc((6.103923048, -2.94), (6.12, -1.5), (6.12, 0))
            Line((6.12, 0), (6, 0.12))
            Line((6, 0.12), (0.803847577, 0.12))
            Line((0.803847577, 0.12), (0.803847577, 0))
        make_face()
    revolve(axis=Axis((-70.548192771, -39.248953788, 5), (0, 0, 1)), revolution_arc=90, mode=Mode.SUBTRACT)
    with BuildSketch(Plane(origin=(-70.548192771, -5.248953788, 5), x_dir=(0, 1, 0), z_dir=(1, 0, 0))) as fillet_3_piece_6:
        with BuildLine():
            CenterArc((0.803847577, -6), FILLET_3_R, 30, 60)
            Line((0.803847577, 0), (0.803847577, 0.12))
            Line((0.803847577, 0.12), (6, 0.12))
            Line((6, 0.12), (6.12, 0))
            ThreePointArc((6.12, 0), (6.12, -1.5), (6.103923048, -2.94))
            Line((6.103923048, -2.94), (6, -3))
        make_face()
    revolve(axis=Axis((-70.548192771, -5.248953788, 5), (0, 0, 1)), revolution_arc=90, mode=Mode.SUBTRACT)
    with BuildSketch(Plane(origin=(-70.548192771, 0.751046212, 5), x_dir=(0, 0, -1), z_dir=(1, 0, 0))) as fillet_3_piece_7:
        with BuildLine():
            CenterArc((6, -5.196152423), FILLET_3_R, 120, 60)
            Line((0, -5.196152423), (-0.12, -5.196152423))
            Line((-0.12, -5.196152423), (-0.12, 0))
            Line((-0.12, 0), (0, 0.12))
            ThreePointArc((0, 0.12), (1.5, 0.12), (2.94, 0.103923048))
            Line((2.94, 0.103923048), (3, 0))
        make_face()
    extrude(amount=142, mode=Mode.SUBTRACT)

    # 草图2<2> → 切除-拉伸2 (cut)
    with BuildSketch(Plane.XY.offset(2).offset(CUT_EXTRUDE_START)):
        with Locations((73.951807229, -41.748953788)):
            Circle(SKETCH_2_2_R)
        with Locations(Location((73.951807229, -2.748953788, 0), (0, 0, 344.465859099))):
            Circle(SKETCH_2_2_R)
        with Locations(Location((-73.048192771, -41.748953788, 0), (0, 0, 285.534141265))):
            Circle(SKETCH_2_2_R)
        with Locations((-73.048192771, -2.748953788)):
            Circle(SKETCH_2_2_R)
    extrude(amount=-CUT_EXTRUDE_2_DEPTH, mode=Mode.SUBTRACT)

    # 草图4 → 切除-拉伸3 (cut)
    with BuildSketch(Plane.XY.offset(5)):
        with Locations((73.951807229, -2.748953788)):
            Circle(SKETCH_4_R)
        with Locations((73.951807229, -41.748953788)):
            Circle(SKETCH_4_R)
        with Locations((-73.048192771, -41.748953788)):
            Circle(SKETCH_4_R)
        with Locations((-73.048192771, -2.748953788)):
            Circle(SKETCH_4_R)
    extrude(amount=-CUT_EXTRUDE_3_DEPTH, mode=Mode.SUBTRACT)


solid = part.part
